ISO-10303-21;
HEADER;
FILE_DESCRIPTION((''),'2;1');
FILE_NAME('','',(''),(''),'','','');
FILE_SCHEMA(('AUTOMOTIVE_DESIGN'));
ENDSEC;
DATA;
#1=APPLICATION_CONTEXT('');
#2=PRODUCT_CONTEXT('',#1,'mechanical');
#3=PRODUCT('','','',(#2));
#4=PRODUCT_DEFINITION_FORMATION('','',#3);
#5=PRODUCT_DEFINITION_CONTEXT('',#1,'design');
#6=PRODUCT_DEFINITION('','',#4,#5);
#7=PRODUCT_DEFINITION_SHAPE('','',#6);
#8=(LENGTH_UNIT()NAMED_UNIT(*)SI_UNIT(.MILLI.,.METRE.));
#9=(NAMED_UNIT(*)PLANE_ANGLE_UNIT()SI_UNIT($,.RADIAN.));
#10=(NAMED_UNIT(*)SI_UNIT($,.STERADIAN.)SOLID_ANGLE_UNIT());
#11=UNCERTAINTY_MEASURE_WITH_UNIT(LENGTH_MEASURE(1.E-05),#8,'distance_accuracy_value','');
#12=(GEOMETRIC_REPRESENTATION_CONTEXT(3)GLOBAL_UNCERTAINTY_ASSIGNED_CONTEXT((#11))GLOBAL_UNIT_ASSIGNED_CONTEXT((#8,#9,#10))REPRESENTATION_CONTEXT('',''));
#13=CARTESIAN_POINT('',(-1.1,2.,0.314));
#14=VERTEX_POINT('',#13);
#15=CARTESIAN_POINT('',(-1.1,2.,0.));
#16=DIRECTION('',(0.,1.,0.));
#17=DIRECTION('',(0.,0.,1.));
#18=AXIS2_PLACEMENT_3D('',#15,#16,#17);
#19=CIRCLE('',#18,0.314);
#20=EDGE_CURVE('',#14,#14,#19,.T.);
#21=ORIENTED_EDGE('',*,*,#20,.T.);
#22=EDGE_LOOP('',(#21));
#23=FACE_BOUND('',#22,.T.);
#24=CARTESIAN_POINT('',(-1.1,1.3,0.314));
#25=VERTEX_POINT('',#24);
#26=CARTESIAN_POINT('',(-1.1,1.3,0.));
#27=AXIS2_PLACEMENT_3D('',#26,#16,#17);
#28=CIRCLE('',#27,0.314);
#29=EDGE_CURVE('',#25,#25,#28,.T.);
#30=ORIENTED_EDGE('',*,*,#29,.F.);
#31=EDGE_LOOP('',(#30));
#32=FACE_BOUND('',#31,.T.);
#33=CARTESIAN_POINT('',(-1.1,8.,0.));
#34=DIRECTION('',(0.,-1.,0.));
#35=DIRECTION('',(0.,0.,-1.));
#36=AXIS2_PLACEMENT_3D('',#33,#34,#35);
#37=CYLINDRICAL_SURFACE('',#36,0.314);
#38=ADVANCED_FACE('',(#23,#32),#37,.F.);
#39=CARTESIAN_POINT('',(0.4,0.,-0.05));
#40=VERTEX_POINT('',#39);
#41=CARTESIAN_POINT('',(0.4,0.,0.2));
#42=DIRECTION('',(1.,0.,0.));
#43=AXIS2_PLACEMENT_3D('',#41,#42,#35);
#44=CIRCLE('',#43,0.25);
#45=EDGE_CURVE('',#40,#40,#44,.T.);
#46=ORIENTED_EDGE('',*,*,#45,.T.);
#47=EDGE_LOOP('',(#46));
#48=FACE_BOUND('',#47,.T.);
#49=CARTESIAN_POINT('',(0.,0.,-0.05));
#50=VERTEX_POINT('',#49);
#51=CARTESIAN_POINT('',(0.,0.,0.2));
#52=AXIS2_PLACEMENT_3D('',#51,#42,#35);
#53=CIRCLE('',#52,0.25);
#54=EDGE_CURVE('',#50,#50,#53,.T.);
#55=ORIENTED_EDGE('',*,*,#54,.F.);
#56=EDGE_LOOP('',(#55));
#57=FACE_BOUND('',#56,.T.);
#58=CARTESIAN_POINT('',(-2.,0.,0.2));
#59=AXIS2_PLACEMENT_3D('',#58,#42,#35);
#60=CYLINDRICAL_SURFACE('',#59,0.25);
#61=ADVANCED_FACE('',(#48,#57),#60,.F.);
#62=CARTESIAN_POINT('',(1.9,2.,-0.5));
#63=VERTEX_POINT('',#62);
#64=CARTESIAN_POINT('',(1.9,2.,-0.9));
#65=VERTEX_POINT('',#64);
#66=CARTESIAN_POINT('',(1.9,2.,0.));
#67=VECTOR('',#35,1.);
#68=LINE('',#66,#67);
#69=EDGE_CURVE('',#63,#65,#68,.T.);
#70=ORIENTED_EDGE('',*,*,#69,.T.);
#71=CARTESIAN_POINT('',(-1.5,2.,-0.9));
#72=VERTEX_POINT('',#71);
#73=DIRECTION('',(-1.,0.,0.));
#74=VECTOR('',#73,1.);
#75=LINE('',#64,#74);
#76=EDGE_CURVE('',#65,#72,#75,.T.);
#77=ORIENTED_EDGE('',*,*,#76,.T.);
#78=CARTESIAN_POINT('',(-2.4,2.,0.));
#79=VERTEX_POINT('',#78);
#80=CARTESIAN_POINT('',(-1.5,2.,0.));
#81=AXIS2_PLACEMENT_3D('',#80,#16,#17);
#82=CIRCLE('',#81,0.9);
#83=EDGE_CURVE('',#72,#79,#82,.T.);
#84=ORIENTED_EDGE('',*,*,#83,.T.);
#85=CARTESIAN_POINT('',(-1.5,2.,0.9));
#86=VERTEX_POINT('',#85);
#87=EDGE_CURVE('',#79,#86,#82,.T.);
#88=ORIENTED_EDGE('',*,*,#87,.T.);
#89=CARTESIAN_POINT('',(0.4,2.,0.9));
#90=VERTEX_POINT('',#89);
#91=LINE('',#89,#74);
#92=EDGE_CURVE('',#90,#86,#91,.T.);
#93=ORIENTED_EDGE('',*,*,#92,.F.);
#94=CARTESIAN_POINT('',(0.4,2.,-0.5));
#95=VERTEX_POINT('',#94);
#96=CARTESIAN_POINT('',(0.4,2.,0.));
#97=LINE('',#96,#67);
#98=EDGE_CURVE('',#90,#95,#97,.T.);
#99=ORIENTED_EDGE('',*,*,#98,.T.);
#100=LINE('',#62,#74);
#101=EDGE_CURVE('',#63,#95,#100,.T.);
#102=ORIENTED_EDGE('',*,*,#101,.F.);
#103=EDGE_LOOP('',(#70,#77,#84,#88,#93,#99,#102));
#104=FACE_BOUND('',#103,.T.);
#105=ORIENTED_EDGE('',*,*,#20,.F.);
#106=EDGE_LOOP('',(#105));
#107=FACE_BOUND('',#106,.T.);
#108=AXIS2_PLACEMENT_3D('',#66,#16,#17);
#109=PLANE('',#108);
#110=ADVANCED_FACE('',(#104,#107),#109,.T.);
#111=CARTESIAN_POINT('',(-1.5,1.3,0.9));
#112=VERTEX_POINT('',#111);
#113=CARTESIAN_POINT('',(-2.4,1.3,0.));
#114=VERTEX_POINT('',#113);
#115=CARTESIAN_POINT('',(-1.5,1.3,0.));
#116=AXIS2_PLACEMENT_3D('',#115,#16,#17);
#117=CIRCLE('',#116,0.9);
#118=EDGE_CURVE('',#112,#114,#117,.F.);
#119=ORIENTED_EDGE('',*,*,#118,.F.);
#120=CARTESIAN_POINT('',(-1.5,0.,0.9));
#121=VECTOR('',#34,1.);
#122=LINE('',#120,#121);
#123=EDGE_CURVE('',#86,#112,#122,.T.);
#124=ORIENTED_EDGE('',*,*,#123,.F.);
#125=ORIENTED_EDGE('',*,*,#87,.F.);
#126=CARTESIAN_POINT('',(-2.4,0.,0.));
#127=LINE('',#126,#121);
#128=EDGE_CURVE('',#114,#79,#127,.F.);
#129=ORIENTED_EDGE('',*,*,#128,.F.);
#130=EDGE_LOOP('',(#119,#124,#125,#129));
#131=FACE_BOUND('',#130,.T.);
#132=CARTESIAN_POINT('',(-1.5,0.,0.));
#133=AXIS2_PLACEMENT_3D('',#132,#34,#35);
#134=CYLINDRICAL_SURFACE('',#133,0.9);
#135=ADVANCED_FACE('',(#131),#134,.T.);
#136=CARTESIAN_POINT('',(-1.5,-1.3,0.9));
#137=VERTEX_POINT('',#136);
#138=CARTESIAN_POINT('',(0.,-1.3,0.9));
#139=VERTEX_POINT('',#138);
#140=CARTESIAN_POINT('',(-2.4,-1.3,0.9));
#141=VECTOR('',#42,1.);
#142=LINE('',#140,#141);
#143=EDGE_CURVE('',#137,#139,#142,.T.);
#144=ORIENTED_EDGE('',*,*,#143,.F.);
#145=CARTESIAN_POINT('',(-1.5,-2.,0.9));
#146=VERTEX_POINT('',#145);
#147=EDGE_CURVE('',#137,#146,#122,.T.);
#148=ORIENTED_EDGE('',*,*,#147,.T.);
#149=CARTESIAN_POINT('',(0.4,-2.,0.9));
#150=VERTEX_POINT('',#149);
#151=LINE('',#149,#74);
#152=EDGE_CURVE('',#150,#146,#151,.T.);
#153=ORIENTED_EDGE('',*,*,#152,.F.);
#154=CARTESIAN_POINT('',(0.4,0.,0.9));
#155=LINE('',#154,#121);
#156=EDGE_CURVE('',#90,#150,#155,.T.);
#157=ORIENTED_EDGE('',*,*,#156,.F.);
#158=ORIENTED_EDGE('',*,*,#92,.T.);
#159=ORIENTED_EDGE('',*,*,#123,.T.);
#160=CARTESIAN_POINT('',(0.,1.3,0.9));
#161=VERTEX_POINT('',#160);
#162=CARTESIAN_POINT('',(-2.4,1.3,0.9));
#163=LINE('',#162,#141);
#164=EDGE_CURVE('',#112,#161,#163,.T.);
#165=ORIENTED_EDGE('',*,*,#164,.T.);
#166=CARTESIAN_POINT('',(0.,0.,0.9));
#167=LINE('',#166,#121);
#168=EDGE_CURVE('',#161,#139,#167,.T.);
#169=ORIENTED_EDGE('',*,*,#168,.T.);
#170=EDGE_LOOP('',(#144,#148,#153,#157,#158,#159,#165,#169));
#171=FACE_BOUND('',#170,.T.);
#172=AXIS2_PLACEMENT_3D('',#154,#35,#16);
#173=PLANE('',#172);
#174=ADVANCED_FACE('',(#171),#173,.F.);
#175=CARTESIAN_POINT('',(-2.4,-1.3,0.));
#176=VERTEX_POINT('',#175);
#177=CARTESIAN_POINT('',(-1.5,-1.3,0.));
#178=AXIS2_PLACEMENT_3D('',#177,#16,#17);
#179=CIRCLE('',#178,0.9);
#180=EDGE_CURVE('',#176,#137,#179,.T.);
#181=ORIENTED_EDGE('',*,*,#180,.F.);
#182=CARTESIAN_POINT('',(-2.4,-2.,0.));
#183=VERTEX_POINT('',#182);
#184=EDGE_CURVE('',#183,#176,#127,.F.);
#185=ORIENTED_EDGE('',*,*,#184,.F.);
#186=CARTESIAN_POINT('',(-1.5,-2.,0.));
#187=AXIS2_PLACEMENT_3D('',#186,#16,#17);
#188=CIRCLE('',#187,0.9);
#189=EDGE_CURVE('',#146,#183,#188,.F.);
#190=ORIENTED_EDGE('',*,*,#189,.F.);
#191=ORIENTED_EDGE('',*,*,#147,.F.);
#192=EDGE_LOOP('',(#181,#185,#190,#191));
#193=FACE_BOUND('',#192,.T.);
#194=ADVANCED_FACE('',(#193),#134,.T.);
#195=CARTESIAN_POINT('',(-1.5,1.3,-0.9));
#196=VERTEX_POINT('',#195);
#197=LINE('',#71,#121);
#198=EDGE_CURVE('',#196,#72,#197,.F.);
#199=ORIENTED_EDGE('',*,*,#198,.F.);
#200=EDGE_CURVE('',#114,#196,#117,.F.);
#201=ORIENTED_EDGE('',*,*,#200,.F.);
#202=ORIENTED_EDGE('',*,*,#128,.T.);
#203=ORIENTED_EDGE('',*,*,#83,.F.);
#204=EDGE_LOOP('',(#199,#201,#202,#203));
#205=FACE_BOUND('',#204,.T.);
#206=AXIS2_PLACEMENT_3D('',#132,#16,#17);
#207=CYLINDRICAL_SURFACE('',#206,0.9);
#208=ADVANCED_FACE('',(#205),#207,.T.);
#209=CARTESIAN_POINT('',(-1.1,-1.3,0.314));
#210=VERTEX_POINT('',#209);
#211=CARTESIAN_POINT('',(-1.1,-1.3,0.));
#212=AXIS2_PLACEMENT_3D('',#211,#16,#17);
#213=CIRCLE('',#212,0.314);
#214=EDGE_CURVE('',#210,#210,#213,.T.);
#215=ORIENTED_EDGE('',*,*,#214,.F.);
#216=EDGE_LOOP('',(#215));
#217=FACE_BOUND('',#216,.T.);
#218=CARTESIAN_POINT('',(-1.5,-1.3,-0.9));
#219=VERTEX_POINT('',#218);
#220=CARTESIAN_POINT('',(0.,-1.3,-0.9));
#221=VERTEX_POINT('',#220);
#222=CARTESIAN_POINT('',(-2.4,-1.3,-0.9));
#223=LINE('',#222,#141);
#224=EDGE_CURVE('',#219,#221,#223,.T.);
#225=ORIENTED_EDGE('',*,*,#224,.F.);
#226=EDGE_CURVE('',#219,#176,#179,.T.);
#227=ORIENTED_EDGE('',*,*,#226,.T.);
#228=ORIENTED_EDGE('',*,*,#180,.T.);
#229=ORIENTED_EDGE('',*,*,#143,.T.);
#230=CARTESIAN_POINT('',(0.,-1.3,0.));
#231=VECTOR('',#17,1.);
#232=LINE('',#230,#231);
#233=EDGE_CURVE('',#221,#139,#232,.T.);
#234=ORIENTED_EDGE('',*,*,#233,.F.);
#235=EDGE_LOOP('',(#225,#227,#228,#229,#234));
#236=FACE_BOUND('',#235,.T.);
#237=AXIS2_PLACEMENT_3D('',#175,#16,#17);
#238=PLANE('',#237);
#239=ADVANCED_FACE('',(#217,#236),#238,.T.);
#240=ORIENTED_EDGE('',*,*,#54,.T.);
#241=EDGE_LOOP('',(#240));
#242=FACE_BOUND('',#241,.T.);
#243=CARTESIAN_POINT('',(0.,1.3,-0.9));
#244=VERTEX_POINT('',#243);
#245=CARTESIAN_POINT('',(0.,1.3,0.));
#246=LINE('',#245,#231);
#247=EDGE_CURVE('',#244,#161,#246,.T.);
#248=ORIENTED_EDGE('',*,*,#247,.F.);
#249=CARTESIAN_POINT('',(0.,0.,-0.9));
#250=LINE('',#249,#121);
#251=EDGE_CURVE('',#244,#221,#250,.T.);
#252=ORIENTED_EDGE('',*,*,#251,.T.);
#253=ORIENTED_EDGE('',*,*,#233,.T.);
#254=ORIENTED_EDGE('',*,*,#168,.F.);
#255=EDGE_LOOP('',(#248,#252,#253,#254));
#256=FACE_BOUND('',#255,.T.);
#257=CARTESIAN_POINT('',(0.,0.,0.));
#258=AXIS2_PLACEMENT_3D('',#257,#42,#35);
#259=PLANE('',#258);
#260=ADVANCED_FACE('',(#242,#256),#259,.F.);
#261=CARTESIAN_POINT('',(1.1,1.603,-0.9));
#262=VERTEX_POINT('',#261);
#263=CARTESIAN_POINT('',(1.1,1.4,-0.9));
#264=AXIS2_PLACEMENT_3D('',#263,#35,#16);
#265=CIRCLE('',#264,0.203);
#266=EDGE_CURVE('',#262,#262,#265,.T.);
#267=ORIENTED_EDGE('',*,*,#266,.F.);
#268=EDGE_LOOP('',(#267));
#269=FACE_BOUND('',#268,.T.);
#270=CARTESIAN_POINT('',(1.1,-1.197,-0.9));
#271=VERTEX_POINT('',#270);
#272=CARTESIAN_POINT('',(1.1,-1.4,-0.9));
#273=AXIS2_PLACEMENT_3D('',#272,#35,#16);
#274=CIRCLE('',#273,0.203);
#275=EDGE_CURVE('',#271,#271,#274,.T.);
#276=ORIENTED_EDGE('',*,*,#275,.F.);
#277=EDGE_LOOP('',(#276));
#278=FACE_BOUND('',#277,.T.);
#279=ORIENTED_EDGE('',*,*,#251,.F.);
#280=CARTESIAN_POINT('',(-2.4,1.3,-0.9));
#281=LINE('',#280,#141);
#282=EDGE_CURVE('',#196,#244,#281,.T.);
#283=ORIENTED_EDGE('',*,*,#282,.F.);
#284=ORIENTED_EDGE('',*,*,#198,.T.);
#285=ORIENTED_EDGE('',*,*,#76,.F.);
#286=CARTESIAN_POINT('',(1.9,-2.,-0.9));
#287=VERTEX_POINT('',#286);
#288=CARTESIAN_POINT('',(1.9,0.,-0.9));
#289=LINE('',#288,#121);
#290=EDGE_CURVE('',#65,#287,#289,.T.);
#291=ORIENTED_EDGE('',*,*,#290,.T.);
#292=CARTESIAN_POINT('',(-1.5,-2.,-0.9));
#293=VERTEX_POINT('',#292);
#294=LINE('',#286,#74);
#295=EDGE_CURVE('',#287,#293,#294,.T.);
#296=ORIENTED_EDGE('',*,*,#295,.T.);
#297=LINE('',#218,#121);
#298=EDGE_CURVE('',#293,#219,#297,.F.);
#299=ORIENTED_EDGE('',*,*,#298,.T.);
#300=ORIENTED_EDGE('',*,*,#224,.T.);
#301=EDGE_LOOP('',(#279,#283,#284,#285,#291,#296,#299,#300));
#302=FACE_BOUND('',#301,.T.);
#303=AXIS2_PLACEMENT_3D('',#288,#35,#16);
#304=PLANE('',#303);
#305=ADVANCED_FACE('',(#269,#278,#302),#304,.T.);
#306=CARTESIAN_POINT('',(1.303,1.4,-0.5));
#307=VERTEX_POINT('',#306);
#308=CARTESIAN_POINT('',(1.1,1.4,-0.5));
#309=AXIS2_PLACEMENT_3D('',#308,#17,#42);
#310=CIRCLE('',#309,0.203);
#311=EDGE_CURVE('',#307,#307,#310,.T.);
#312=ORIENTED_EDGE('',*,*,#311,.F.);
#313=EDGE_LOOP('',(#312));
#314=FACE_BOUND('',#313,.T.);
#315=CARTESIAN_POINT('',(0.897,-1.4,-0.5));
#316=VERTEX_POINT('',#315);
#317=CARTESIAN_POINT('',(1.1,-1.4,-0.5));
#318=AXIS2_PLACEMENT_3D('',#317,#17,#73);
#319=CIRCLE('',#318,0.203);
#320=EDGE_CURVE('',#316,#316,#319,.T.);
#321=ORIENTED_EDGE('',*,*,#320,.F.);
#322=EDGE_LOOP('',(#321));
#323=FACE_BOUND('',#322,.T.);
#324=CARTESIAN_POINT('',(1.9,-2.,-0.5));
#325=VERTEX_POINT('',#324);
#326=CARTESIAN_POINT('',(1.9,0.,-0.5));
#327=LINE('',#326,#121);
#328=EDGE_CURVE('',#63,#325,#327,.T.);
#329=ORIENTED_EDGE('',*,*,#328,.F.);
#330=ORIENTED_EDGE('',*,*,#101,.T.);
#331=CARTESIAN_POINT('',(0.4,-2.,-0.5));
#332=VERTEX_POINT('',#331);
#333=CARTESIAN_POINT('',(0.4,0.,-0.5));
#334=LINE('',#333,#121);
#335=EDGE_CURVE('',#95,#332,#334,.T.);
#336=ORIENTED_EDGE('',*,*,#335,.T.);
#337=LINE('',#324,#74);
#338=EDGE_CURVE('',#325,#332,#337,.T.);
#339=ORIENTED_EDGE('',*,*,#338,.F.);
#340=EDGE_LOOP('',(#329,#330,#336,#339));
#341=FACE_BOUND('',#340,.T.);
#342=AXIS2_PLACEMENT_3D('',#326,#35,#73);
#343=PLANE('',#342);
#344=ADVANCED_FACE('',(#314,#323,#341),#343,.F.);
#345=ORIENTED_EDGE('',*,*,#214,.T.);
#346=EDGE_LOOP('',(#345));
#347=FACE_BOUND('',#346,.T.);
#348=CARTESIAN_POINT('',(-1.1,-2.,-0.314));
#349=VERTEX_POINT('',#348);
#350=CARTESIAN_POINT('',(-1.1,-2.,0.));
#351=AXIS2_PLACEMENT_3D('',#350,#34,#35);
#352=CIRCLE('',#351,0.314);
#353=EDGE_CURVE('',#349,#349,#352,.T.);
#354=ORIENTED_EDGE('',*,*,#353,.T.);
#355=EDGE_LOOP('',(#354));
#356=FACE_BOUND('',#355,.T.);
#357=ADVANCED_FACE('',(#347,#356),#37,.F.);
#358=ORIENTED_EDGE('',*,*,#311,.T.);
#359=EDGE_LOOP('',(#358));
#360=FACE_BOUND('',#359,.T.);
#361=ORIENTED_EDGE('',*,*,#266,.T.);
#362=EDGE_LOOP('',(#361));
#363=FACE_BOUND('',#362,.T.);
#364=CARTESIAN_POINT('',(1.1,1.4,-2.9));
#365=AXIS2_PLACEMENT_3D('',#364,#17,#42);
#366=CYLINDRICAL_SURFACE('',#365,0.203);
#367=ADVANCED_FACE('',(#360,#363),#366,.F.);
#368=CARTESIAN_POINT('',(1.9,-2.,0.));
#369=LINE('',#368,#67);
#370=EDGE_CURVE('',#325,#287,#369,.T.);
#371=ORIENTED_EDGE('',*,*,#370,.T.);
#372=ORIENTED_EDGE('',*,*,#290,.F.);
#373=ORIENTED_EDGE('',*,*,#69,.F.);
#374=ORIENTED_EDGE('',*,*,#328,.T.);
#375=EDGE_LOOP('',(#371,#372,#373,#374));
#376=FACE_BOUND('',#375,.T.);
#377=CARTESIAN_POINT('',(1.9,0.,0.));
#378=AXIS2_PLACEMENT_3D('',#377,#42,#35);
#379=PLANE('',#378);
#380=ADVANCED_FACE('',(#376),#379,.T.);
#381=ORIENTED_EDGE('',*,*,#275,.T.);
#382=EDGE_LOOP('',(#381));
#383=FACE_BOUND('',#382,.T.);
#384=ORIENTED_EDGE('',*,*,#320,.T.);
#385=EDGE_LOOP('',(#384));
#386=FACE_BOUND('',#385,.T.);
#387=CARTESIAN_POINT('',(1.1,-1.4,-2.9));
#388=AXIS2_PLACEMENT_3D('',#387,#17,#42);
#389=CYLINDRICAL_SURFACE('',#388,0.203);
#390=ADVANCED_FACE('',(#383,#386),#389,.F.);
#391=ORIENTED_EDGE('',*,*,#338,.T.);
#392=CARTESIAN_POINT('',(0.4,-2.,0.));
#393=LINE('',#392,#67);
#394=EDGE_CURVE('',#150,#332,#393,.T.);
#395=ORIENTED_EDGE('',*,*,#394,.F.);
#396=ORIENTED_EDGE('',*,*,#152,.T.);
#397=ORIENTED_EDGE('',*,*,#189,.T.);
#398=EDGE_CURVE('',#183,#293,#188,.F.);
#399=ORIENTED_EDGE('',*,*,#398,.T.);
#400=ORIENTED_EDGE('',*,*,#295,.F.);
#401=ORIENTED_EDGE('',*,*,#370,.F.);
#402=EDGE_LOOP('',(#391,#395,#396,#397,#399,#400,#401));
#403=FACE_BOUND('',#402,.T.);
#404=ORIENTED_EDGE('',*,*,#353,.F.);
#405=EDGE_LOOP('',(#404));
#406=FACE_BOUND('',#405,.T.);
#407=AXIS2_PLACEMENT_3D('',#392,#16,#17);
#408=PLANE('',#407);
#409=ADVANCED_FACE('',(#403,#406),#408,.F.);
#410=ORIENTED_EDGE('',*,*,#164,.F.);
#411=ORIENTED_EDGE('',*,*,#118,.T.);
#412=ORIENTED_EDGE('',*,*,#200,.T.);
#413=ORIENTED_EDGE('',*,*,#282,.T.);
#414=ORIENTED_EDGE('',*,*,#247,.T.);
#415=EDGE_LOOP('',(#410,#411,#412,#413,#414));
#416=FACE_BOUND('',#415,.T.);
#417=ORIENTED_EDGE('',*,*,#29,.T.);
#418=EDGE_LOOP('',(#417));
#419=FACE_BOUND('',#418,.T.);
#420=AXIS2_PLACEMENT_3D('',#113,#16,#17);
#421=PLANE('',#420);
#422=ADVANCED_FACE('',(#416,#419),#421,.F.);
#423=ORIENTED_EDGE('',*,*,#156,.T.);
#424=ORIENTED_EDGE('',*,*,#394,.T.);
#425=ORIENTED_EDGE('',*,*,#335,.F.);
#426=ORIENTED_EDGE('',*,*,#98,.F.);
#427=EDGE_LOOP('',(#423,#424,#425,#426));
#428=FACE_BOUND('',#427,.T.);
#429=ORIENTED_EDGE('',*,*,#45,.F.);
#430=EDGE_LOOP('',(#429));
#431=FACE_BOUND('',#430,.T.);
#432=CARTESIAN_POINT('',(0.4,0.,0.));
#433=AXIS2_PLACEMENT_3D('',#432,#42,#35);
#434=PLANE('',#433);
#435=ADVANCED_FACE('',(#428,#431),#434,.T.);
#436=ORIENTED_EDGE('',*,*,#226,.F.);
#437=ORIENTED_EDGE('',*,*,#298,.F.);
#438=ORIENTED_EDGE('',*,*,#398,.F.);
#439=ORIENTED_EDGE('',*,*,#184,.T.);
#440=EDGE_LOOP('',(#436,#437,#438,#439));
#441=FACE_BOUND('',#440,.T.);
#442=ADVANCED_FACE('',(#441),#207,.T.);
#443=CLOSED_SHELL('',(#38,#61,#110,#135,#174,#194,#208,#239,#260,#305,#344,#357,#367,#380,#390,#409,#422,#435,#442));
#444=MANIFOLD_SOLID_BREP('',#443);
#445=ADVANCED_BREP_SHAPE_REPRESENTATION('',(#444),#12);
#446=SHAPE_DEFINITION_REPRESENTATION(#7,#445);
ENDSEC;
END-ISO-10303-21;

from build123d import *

# Parameters (mm, degrees)
CROQUIS1_W              = 1.4
CROQUIS1_H              = 2.6
SALIENTE_EXTRUIR1_DEPTH = 0.4
CROQUIS1_3_W            = 0.4
CROQUIS1_3_H            = 2.6
SALIENTE_EXTRUIR2_DEPTH = 1.9
CROQUIS1_6_W            = 0.4
CROQUIS1_6_H            = 0.7
SALIENTE_EXTRUIR3_DEPTH = 1.9
CROQUIS1_8_W            = 1.4
CROQUIS1_8_H            = 0.7
SALIENTE_EXTRUIR5_DEPTH = 0.4
CROQUIS1_9_W            = 1.4
CROQUIS1_9_H            = 0.7
SALIENTE_EXTRUIR6_DEPTH = 0.4
CROQUIS1_10_W           = 0.4
CROQUIS1_10_H           = 0.7
SALIENTE_EXTRUIR7_DEPTH = 1.9
CROQUIS1_11_W           = 0.4
CROQUIS1_11_H           = 0.7
CROQUIS1_11_W_2         = 1.4
SALIENTE_EXTRUIR8_DEPTH = 2.4
CROQUIS2_R              = 0.203
CORTAR_EXTRUIR1_DEPTH   = 2.4
CROQUIS3_R              = 0.25
CORTAR_EXTRUIR2_DEPTH   = 2.4
CROQUIS4_R              = 0.314
CORTAR_EXTRUIR3_DEPTH   = 10
REDONDEO3_R             = 0.9
REDONDEO4_R             = 0.9


with BuildPart() as part:
    # Croquis1 → Saliente-Extruir1 (new body)
    with BuildSketch(Plane(origin=(0, 0, 0), x_dir=(0, 0, -1), z_dir=(1, 0, 0))):
        with Locations((-0.2, 0)):
            Rectangle(CROQUIS1_W, CROQUIS1_H)
    extrude(amount=SALIENTE_EXTRUIR1_DEPTH)

    # Croquis1<3> → Saliente-Extruir2 (add)
    with BuildSketch(Plane(origin=(0, 0, 0), x_dir=(0, 0, -1), z_dir=(1, 0, 0))):
        with Locations((0.7, 0)):
            Rectangle(CROQUIS1_3_W, CROQUIS1_3_H)
    extrude(amount=SALIENTE_EXTRUIR2_DEPTH)

    # Croquis1<6> → Saliente-Extruir3 (add)
    with BuildSketch(Plane(origin=(0, 0, 0), x_dir=(0, 0, -1), z_dir=(1, 0, 0))):
        with Locations((0.7, 1.65)):
            Rectangle(CROQUIS1_6_W, CROQUIS1_6_H)
    extrude(amount=SALIENTE_EXTRUIR3_DEPTH)

    # Croquis1<8> → Saliente-Extruir5 (add)
    with BuildSketch(Plane(origin=(0, 0, 0), x_dir=(0, 0, -1), z_dir=(1, 0, 0))):
        with Locations((-0.2, 1.65)):
            Rectangle(CROQUIS1_8_W, CROQUIS1_8_H)
    extrude(amount=SALIENTE_EXTRUIR5_DEPTH)

    # Croquis1<9> → Saliente-Extruir6 (add)
    with BuildSketch(Plane(origin=(0, 0, 0), x_dir=(0, 0, -1), z_dir=(1, 0, 0))):
        with Locations((-0.2, -1.65)):
            Rectangle(CROQUIS1_9_W, CROQUIS1_9_H)
    extrude(amount=SALIENTE_EXTRUIR6_DEPTH)

    # Croquis1<10> → Saliente-Extruir7 (add)
    with BuildSketch(Plane(origin=(0, 0, 0), x_dir=(0, 0, -1), z_dir=(1, 0, 0))):
        with Locations((0.7, -1.65)):
            Rectangle(CROQUIS1_10_W, CROQUIS1_10_H)
    extrude(amount=SALIENTE_EXTRUIR7_DEPTH)

    # Croquis1<11> → Saliente-Extruir8 (add)
    with BuildSketch(Plane(origin=(0, 0, 0), x_dir=(0, 0, -1), z_dir=(1, 0, 0))):
        with Locations((0.7, 1.65)):
            Rectangle(CROQUIS1_11_W, CROQUIS1_11_H)
        with Locations((-0.2, 1.65)):
            Rectangle(CROQUIS1_11_W_2, CROQUIS1_11_H)
        with Locations((-0.2, -1.65)):
            Rectangle(CROQUIS1_11_W_2, CROQUIS1_11_H)
        with Locations((0.7, -1.65)):
            Rectangle(CROQUIS1_11_W, CROQUIS1_11_H)
    extrude(amount=-SALIENTE_EXTRUIR8_DEPTH)

    # Croquis2 → Cortar-Extruir1 (cut)
    with BuildSketch(Plane.XY.offset(-0.5)):
        with Locations((1.1, 1.4)):
            Circle(CROQUIS2_R)
        with Locations(Location((1.1, -1.4, 0), (0, 0, 90))):
            Circle(CROQUIS2_R)
    extrude(amount=-CORTAR_EXTRUIR1_DEPTH, mode=Mode.SUBTRACT)

    # Croquis3 → Cortar-Extruir2 (cut)
    with BuildSketch(Plane(origin=(0.4, 0, 0), x_dir=(0, 0, -1), z_dir=(1, 0, 0))):
        with Locations((-0.2, 0)):
            Circle(CROQUIS3_R)
    extrude(amount=-CORTAR_EXTRUIR2_DEPTH, mode=Mode.SUBTRACT)

    # Croquis4 → Cortar-Extruir3 (cut)
    with BuildSketch(Plane.XZ.offset(2)):
        with Locations(Location((-1.1, 0, 0), (0, 0, 270))):
            Circle(CROQUIS4_R)
    extrude(amount=-CORTAR_EXTRUIR3_DEPTH, mode=Mode.SUBTRACT)

    # Redondeo3
    redondeo3_edges = [part.edges().sort_by_distance(p)[0] for p in [
        (-2.4, 1.65, 0.9),
        (-2.4, -1.65, 0.9),
    ]]
    fillet(redondeo3_edges, radius=REDONDEO3_R)

    # Redondeo4
    redondeo4_edges = [part.edges().sort_by_distance(p)[0] for p in [
        (-2.4, -1.65, -0.9),
        (-2.4, 1.65, -0.9),
    ]]
    fillet(redondeo4_edges, radius=REDONDEO4_R - 0.0001)  # a hair under: the kernel refuses the full size


solid = part.part
